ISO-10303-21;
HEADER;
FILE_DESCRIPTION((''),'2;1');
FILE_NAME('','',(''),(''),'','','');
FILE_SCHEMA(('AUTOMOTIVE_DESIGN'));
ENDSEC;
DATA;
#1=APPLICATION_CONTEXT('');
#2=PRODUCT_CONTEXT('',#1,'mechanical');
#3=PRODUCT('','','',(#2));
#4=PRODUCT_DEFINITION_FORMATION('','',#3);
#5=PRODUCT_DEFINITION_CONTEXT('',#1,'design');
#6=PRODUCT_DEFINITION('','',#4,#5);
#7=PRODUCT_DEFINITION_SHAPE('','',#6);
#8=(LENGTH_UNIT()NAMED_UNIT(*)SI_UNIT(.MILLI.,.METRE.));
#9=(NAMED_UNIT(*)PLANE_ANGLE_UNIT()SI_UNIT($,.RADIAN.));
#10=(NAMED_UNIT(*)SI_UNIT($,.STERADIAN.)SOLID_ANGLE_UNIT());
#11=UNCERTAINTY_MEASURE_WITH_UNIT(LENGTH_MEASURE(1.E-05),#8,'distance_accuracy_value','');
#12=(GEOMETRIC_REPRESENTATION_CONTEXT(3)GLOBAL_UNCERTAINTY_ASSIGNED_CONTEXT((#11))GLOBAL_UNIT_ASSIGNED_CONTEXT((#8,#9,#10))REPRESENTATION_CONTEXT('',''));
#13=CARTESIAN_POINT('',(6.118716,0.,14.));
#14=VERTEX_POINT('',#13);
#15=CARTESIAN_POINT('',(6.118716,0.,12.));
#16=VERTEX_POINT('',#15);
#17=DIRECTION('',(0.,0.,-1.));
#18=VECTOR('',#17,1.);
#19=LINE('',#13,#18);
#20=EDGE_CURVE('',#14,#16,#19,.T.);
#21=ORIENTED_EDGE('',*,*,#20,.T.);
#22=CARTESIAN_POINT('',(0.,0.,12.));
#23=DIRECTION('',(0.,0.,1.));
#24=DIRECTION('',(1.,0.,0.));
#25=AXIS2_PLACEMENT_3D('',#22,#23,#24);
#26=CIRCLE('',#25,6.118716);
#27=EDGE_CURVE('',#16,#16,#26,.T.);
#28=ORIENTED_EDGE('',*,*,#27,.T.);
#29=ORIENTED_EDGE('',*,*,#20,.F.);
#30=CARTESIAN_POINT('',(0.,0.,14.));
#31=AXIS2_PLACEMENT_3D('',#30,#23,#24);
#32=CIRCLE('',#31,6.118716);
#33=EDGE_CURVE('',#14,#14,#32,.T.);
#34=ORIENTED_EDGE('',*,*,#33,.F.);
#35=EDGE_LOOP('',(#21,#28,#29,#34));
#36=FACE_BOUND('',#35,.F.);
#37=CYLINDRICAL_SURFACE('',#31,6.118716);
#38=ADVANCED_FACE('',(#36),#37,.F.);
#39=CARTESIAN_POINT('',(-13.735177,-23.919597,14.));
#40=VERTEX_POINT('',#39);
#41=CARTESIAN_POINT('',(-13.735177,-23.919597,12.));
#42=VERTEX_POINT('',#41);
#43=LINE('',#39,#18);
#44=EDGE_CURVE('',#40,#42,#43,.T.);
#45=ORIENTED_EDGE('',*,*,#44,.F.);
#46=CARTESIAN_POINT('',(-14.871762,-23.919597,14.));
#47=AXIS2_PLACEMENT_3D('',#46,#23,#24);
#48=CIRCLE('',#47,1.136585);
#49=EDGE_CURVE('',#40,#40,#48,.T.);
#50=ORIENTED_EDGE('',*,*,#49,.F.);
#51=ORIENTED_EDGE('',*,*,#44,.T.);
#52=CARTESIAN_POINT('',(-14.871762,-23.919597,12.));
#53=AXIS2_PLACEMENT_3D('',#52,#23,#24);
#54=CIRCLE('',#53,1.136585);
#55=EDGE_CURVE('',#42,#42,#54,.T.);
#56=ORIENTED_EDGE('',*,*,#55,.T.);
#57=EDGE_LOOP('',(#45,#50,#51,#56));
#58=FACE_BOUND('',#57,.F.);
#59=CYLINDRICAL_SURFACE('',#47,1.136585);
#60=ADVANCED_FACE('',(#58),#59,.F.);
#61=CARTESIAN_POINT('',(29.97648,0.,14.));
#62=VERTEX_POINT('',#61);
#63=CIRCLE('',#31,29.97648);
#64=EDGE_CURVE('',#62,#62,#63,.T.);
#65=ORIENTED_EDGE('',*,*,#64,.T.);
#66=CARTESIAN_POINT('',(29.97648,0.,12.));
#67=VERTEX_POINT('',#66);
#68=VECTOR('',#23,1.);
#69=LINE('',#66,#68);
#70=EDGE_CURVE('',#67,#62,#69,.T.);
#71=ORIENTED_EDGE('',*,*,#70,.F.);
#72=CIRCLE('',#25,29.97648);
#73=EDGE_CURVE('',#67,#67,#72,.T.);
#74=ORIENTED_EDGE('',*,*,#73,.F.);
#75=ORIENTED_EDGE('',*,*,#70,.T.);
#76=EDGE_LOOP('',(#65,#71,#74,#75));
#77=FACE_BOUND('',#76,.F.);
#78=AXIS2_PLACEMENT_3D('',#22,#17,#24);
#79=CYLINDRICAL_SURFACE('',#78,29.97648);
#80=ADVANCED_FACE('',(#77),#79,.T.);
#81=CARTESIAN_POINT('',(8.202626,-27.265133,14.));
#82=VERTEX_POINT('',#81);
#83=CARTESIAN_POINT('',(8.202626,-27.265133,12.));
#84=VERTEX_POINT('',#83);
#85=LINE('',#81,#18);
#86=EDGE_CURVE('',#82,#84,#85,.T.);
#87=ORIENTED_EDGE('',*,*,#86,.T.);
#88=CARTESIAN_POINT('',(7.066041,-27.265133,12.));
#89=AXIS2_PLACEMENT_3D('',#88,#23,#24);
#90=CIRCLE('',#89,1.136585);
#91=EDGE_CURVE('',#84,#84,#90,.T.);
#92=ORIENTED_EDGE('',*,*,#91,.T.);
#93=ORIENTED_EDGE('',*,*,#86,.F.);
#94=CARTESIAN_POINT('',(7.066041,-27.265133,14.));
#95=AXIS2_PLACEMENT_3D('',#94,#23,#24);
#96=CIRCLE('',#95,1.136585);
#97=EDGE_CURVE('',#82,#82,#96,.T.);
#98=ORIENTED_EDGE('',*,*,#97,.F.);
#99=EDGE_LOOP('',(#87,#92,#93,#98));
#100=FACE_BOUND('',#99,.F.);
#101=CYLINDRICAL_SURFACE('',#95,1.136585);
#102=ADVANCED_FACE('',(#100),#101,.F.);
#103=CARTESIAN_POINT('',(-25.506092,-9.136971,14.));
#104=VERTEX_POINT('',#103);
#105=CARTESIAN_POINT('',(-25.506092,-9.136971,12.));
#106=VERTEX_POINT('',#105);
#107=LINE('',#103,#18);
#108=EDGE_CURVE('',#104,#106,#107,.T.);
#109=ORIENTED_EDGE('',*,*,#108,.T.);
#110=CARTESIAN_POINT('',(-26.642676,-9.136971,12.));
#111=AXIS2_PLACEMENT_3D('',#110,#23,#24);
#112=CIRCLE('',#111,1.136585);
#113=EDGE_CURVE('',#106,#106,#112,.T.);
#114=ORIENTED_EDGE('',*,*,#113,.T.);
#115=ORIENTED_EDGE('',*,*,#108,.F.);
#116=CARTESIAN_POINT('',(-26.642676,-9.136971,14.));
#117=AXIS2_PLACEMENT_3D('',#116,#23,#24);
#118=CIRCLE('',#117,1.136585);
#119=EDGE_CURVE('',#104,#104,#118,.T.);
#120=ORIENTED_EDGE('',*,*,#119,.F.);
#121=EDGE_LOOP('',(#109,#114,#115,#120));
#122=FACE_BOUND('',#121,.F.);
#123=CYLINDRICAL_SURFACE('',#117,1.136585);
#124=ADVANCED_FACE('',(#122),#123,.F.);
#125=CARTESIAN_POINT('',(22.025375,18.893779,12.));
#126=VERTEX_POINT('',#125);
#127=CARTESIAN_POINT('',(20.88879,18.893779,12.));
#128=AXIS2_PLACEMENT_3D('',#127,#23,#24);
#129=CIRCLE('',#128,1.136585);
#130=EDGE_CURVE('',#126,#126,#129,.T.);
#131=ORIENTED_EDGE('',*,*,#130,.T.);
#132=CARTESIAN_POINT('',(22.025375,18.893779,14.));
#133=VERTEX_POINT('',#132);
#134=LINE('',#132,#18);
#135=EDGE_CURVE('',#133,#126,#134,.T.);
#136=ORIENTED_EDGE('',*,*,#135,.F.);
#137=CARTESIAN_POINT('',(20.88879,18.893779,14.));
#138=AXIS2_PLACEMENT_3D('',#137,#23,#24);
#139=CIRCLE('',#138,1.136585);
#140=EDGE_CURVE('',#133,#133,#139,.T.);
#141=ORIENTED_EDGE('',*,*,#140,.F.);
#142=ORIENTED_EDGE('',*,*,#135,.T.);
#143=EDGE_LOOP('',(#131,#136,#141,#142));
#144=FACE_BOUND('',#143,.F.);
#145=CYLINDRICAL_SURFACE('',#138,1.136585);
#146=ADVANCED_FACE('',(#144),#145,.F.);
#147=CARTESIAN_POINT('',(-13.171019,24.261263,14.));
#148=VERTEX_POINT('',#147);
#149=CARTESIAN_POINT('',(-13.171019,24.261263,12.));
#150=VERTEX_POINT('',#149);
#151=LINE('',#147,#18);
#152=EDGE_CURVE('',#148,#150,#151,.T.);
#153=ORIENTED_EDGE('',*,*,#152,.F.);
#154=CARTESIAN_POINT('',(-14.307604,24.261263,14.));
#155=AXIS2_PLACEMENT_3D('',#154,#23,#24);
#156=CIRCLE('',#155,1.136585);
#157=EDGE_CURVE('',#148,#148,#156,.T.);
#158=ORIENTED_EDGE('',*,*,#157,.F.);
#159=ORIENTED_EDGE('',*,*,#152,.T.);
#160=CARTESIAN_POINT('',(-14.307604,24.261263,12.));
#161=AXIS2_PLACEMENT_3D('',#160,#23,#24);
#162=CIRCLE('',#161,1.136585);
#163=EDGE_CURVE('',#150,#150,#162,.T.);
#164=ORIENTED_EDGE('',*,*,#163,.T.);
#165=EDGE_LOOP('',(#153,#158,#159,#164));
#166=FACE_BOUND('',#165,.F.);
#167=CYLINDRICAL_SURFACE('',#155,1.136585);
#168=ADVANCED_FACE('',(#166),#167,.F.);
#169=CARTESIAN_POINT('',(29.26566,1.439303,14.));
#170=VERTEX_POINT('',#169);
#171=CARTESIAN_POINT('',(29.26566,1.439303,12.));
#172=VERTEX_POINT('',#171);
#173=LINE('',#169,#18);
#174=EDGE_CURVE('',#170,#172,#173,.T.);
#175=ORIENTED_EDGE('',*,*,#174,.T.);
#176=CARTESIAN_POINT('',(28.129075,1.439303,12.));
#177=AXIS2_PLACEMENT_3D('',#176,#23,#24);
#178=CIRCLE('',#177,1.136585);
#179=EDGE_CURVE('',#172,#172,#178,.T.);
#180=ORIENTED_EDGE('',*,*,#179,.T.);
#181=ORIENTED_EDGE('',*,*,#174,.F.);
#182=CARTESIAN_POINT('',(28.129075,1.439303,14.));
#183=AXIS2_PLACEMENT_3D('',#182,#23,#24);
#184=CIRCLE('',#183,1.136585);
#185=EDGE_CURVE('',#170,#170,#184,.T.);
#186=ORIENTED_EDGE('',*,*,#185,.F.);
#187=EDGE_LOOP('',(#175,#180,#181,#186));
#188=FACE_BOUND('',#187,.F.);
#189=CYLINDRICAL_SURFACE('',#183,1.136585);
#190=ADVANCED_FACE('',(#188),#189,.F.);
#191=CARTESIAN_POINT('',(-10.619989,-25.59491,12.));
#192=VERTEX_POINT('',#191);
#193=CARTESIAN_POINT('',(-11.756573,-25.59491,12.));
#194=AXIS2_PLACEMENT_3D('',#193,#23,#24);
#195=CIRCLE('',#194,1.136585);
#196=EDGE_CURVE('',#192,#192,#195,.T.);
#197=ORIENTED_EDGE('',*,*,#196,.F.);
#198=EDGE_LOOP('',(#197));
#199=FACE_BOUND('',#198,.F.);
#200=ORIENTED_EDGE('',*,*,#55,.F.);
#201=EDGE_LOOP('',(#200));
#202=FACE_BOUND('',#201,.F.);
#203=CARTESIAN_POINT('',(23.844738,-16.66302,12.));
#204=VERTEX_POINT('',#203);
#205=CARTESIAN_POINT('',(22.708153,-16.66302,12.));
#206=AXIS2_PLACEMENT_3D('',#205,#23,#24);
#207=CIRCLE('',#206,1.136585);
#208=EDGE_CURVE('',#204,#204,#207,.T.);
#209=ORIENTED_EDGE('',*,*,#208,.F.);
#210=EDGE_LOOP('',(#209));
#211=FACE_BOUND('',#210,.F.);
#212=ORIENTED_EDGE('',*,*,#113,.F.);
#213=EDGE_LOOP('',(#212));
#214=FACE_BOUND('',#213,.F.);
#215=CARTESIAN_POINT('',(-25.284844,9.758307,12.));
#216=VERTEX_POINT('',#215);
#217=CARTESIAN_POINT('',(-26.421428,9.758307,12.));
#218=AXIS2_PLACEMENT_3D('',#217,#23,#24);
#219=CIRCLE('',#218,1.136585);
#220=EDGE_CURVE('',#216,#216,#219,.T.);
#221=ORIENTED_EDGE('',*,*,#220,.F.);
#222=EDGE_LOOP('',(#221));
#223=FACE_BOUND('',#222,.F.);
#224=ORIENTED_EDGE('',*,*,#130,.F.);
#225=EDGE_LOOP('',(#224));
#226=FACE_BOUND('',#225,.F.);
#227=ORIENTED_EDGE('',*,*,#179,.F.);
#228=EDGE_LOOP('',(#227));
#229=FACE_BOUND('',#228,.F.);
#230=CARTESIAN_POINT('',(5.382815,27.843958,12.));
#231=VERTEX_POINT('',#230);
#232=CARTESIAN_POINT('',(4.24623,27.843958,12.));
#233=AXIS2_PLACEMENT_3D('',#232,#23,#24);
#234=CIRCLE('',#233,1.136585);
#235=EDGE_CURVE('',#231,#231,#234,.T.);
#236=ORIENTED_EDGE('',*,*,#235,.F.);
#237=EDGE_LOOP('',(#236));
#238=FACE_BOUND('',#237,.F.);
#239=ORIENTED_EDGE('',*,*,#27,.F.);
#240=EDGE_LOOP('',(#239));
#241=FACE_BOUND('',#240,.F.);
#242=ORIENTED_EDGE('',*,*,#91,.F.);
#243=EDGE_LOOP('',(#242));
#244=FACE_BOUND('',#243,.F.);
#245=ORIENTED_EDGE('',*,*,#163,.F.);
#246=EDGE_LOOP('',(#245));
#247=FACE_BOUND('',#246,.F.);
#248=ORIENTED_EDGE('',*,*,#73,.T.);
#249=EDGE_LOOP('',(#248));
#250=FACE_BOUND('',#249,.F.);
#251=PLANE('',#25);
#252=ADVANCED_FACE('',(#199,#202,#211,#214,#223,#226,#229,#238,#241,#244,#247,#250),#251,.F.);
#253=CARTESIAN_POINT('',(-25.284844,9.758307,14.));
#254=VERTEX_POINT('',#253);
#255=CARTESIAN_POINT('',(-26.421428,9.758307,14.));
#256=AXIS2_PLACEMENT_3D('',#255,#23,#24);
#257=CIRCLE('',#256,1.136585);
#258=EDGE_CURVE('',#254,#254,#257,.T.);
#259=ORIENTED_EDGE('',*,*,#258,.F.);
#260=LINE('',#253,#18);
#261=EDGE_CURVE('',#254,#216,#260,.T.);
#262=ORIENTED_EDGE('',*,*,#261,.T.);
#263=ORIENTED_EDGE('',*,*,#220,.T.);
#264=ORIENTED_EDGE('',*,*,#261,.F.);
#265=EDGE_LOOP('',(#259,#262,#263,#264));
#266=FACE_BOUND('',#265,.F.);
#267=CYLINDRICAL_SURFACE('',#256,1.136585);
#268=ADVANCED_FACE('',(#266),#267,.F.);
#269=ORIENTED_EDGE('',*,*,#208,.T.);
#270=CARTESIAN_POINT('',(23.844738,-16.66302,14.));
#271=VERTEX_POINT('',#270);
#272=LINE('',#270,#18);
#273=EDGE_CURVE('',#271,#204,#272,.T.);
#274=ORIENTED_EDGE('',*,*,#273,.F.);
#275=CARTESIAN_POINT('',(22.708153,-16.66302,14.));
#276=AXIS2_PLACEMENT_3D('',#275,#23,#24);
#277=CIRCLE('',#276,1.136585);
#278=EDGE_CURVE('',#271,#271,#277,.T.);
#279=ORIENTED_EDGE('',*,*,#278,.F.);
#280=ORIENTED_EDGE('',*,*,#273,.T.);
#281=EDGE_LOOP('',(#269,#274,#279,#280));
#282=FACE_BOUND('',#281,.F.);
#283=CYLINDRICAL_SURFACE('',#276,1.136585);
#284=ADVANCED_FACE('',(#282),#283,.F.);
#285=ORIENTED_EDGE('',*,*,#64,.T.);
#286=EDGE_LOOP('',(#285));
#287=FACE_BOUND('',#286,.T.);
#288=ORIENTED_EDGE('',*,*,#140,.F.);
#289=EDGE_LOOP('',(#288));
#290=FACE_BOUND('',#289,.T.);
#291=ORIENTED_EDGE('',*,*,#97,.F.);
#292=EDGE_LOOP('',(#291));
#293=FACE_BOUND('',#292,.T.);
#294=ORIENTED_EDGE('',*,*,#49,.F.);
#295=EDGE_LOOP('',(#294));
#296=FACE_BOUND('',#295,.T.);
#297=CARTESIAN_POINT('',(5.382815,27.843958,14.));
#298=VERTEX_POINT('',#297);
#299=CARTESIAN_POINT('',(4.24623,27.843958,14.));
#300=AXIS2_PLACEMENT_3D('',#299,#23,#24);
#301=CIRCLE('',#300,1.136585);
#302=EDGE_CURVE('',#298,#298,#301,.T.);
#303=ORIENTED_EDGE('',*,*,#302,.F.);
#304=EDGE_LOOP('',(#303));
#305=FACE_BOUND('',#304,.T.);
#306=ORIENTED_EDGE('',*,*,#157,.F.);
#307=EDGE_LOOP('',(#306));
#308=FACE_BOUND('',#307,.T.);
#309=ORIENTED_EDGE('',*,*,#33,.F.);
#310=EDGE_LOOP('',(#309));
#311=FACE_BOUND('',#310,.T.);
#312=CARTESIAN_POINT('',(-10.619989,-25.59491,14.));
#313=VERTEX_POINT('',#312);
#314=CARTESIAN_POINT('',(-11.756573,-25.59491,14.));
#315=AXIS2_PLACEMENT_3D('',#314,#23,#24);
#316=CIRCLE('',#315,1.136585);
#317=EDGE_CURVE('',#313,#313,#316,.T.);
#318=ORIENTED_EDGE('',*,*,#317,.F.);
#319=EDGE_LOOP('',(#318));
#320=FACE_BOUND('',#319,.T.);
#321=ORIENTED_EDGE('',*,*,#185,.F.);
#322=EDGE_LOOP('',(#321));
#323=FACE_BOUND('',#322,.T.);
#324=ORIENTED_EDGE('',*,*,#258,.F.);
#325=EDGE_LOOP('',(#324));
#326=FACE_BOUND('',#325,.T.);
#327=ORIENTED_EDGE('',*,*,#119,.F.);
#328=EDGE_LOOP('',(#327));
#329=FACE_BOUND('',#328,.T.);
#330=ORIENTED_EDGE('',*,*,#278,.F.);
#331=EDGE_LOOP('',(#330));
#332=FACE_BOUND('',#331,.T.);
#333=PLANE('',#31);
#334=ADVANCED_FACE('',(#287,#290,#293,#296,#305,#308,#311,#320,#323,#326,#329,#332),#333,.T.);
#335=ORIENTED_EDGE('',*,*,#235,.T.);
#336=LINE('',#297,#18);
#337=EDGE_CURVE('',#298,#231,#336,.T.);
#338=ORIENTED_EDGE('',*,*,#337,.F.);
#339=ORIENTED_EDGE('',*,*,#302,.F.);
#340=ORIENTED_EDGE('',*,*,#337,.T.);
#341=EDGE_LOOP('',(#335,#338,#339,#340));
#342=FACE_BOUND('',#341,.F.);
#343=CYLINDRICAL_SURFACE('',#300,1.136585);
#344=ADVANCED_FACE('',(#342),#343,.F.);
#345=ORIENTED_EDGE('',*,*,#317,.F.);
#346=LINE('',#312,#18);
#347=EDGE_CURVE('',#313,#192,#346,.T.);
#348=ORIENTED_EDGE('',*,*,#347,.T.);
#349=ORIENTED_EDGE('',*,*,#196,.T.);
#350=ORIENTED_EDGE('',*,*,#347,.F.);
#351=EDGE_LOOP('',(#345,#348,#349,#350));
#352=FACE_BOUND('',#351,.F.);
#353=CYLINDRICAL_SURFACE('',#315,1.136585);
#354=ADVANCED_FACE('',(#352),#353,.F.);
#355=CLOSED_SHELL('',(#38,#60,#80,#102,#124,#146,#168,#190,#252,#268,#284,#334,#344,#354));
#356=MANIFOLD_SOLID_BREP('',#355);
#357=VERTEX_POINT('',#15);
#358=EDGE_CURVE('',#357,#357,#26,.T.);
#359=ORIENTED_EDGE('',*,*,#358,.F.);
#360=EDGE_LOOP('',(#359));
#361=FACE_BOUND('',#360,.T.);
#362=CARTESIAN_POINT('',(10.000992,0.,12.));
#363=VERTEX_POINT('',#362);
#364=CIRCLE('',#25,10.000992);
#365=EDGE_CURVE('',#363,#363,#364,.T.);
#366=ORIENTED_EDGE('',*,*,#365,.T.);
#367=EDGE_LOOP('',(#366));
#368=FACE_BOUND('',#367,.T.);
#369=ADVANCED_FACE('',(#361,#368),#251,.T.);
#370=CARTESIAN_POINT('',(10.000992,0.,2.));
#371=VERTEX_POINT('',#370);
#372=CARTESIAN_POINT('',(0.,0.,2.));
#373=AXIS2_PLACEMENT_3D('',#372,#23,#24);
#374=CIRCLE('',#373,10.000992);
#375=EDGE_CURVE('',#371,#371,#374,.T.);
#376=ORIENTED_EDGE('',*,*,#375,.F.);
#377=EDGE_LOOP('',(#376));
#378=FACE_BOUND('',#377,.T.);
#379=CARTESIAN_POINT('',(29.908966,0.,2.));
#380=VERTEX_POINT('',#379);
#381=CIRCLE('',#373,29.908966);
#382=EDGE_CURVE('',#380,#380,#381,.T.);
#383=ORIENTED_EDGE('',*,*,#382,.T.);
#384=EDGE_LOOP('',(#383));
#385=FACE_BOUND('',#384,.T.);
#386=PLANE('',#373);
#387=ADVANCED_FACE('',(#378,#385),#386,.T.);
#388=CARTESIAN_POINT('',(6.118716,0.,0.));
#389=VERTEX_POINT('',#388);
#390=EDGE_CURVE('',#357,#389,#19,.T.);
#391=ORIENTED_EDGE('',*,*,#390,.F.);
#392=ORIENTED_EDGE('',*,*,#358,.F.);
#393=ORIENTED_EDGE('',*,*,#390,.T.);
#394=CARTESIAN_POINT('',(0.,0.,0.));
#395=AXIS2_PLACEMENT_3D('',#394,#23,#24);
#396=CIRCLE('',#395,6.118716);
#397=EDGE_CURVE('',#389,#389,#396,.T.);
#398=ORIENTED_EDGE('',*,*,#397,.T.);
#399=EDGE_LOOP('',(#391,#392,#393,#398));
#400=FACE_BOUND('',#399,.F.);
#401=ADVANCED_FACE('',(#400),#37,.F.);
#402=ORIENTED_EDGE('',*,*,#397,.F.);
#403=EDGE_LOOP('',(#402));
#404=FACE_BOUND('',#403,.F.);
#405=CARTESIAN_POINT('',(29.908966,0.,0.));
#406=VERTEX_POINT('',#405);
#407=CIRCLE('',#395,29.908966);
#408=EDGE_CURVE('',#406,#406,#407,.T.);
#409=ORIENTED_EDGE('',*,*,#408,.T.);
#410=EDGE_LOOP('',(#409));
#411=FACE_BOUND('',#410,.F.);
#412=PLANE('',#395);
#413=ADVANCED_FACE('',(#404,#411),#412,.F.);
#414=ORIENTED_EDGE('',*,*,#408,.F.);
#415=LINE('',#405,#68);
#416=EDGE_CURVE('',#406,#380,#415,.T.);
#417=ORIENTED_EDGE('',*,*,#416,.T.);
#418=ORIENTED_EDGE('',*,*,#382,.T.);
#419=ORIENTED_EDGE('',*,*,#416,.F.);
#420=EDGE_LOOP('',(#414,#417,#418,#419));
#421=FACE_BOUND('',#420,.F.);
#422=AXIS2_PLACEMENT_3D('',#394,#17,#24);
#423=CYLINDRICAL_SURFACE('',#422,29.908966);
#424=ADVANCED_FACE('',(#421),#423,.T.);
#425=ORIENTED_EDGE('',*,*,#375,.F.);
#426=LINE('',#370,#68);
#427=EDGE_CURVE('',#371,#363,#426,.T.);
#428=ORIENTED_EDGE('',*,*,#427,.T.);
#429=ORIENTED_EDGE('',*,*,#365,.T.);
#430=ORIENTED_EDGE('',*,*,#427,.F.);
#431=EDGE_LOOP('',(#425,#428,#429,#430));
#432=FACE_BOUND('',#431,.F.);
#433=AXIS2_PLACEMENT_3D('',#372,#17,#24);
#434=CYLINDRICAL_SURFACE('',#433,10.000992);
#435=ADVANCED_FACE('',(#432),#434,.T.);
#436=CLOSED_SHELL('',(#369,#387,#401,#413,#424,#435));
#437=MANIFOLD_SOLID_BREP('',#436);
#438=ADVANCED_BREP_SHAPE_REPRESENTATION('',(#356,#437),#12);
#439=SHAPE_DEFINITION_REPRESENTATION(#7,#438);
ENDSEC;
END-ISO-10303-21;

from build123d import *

# Parameters (mm, degrees)
F0_R     = 29.9089661925
F1_DEPTH = 2
F2_R     = 10.0009924636
F3_DEPTH = 10
F4_R     = 29.9764800093
F5_DEPTH = 2
F6_R     = 1.1365848363
F7_DEPTH = 25
F8_R     = 6.1187155748
F9_DEPTH = 25


with BuildPart() as f1:
    # F0 (on Top) → F1 (new body)
    with BuildSketch(Plane.XY):
        Circle(F0_R)
    extrude(amount=F1_DEPTH)

    # F2 (on face) → F3 (join)
    with BuildSketch(Plane.XY.offset(2)):
        Circle(F2_R)
    extrude(amount=F3_DEPTH)


with BuildPart() as f5:
    # F4 (on face) → F5 (new body)
    with BuildSketch(Plane.XY.offset(12)):
        Circle(F4_R)
    extrude(amount=F5_DEPTH)

    # F6 (on face) → F7 (cut)
    with BuildSketch(Plane.XY.offset(14)):
        with Locations((-14.8717621341, -23.9195972681)):
            Circle(F6_R)
        with Locations((-26.6426764835, -9.136970627)):
            Circle(F6_R)
        with Locations((-26.4214284802, 9.7583072051)):
            Circle(F6_R)
        with Locations((-14.3076042892, 24.2612634038)):
            Circle(F6_R)
        with Locations((4.2462302972, 27.8439575259)):
            Circle(F6_R)
        with Locations((20.888789823, 18.8937794571)):
            Circle(F6_R)
        with Locations((28.1290748038, 1.439302999)):
            Circle(F6_R)
        with Locations((22.7081531643, -16.6630196036)):
            Circle(F6_R)
        with Locations((7.0660414861, -27.2651334154)):
            Circle(F6_R)
        with Locations((-11.75657335, -25.5949101485)):
            Circle(F6_R)
    extrude(amount=-F7_DEPTH, mode=Mode.SUBTRACT)


with BuildPart() as f9_tool:
    # F8 (on face) → F9 (new body)
    with BuildSketch(Plane.XY.offset(14)):
        Circle(F8_R)
    extrude(amount=-F9_DEPTH)


with BuildPart() as f1_1:
    add(f1.part)

    # F9: cut by f9_tool
    add(f9_tool.part, mode=Mode.SUBTRACT)


with BuildPart() as f5_1:
    add(f5.part)

    # F9: cut by f9_tool
    add(f9_tool.part, mode=Mode.SUBTRACT)


solid = Compound([f1_1.part, f5_1.part])
